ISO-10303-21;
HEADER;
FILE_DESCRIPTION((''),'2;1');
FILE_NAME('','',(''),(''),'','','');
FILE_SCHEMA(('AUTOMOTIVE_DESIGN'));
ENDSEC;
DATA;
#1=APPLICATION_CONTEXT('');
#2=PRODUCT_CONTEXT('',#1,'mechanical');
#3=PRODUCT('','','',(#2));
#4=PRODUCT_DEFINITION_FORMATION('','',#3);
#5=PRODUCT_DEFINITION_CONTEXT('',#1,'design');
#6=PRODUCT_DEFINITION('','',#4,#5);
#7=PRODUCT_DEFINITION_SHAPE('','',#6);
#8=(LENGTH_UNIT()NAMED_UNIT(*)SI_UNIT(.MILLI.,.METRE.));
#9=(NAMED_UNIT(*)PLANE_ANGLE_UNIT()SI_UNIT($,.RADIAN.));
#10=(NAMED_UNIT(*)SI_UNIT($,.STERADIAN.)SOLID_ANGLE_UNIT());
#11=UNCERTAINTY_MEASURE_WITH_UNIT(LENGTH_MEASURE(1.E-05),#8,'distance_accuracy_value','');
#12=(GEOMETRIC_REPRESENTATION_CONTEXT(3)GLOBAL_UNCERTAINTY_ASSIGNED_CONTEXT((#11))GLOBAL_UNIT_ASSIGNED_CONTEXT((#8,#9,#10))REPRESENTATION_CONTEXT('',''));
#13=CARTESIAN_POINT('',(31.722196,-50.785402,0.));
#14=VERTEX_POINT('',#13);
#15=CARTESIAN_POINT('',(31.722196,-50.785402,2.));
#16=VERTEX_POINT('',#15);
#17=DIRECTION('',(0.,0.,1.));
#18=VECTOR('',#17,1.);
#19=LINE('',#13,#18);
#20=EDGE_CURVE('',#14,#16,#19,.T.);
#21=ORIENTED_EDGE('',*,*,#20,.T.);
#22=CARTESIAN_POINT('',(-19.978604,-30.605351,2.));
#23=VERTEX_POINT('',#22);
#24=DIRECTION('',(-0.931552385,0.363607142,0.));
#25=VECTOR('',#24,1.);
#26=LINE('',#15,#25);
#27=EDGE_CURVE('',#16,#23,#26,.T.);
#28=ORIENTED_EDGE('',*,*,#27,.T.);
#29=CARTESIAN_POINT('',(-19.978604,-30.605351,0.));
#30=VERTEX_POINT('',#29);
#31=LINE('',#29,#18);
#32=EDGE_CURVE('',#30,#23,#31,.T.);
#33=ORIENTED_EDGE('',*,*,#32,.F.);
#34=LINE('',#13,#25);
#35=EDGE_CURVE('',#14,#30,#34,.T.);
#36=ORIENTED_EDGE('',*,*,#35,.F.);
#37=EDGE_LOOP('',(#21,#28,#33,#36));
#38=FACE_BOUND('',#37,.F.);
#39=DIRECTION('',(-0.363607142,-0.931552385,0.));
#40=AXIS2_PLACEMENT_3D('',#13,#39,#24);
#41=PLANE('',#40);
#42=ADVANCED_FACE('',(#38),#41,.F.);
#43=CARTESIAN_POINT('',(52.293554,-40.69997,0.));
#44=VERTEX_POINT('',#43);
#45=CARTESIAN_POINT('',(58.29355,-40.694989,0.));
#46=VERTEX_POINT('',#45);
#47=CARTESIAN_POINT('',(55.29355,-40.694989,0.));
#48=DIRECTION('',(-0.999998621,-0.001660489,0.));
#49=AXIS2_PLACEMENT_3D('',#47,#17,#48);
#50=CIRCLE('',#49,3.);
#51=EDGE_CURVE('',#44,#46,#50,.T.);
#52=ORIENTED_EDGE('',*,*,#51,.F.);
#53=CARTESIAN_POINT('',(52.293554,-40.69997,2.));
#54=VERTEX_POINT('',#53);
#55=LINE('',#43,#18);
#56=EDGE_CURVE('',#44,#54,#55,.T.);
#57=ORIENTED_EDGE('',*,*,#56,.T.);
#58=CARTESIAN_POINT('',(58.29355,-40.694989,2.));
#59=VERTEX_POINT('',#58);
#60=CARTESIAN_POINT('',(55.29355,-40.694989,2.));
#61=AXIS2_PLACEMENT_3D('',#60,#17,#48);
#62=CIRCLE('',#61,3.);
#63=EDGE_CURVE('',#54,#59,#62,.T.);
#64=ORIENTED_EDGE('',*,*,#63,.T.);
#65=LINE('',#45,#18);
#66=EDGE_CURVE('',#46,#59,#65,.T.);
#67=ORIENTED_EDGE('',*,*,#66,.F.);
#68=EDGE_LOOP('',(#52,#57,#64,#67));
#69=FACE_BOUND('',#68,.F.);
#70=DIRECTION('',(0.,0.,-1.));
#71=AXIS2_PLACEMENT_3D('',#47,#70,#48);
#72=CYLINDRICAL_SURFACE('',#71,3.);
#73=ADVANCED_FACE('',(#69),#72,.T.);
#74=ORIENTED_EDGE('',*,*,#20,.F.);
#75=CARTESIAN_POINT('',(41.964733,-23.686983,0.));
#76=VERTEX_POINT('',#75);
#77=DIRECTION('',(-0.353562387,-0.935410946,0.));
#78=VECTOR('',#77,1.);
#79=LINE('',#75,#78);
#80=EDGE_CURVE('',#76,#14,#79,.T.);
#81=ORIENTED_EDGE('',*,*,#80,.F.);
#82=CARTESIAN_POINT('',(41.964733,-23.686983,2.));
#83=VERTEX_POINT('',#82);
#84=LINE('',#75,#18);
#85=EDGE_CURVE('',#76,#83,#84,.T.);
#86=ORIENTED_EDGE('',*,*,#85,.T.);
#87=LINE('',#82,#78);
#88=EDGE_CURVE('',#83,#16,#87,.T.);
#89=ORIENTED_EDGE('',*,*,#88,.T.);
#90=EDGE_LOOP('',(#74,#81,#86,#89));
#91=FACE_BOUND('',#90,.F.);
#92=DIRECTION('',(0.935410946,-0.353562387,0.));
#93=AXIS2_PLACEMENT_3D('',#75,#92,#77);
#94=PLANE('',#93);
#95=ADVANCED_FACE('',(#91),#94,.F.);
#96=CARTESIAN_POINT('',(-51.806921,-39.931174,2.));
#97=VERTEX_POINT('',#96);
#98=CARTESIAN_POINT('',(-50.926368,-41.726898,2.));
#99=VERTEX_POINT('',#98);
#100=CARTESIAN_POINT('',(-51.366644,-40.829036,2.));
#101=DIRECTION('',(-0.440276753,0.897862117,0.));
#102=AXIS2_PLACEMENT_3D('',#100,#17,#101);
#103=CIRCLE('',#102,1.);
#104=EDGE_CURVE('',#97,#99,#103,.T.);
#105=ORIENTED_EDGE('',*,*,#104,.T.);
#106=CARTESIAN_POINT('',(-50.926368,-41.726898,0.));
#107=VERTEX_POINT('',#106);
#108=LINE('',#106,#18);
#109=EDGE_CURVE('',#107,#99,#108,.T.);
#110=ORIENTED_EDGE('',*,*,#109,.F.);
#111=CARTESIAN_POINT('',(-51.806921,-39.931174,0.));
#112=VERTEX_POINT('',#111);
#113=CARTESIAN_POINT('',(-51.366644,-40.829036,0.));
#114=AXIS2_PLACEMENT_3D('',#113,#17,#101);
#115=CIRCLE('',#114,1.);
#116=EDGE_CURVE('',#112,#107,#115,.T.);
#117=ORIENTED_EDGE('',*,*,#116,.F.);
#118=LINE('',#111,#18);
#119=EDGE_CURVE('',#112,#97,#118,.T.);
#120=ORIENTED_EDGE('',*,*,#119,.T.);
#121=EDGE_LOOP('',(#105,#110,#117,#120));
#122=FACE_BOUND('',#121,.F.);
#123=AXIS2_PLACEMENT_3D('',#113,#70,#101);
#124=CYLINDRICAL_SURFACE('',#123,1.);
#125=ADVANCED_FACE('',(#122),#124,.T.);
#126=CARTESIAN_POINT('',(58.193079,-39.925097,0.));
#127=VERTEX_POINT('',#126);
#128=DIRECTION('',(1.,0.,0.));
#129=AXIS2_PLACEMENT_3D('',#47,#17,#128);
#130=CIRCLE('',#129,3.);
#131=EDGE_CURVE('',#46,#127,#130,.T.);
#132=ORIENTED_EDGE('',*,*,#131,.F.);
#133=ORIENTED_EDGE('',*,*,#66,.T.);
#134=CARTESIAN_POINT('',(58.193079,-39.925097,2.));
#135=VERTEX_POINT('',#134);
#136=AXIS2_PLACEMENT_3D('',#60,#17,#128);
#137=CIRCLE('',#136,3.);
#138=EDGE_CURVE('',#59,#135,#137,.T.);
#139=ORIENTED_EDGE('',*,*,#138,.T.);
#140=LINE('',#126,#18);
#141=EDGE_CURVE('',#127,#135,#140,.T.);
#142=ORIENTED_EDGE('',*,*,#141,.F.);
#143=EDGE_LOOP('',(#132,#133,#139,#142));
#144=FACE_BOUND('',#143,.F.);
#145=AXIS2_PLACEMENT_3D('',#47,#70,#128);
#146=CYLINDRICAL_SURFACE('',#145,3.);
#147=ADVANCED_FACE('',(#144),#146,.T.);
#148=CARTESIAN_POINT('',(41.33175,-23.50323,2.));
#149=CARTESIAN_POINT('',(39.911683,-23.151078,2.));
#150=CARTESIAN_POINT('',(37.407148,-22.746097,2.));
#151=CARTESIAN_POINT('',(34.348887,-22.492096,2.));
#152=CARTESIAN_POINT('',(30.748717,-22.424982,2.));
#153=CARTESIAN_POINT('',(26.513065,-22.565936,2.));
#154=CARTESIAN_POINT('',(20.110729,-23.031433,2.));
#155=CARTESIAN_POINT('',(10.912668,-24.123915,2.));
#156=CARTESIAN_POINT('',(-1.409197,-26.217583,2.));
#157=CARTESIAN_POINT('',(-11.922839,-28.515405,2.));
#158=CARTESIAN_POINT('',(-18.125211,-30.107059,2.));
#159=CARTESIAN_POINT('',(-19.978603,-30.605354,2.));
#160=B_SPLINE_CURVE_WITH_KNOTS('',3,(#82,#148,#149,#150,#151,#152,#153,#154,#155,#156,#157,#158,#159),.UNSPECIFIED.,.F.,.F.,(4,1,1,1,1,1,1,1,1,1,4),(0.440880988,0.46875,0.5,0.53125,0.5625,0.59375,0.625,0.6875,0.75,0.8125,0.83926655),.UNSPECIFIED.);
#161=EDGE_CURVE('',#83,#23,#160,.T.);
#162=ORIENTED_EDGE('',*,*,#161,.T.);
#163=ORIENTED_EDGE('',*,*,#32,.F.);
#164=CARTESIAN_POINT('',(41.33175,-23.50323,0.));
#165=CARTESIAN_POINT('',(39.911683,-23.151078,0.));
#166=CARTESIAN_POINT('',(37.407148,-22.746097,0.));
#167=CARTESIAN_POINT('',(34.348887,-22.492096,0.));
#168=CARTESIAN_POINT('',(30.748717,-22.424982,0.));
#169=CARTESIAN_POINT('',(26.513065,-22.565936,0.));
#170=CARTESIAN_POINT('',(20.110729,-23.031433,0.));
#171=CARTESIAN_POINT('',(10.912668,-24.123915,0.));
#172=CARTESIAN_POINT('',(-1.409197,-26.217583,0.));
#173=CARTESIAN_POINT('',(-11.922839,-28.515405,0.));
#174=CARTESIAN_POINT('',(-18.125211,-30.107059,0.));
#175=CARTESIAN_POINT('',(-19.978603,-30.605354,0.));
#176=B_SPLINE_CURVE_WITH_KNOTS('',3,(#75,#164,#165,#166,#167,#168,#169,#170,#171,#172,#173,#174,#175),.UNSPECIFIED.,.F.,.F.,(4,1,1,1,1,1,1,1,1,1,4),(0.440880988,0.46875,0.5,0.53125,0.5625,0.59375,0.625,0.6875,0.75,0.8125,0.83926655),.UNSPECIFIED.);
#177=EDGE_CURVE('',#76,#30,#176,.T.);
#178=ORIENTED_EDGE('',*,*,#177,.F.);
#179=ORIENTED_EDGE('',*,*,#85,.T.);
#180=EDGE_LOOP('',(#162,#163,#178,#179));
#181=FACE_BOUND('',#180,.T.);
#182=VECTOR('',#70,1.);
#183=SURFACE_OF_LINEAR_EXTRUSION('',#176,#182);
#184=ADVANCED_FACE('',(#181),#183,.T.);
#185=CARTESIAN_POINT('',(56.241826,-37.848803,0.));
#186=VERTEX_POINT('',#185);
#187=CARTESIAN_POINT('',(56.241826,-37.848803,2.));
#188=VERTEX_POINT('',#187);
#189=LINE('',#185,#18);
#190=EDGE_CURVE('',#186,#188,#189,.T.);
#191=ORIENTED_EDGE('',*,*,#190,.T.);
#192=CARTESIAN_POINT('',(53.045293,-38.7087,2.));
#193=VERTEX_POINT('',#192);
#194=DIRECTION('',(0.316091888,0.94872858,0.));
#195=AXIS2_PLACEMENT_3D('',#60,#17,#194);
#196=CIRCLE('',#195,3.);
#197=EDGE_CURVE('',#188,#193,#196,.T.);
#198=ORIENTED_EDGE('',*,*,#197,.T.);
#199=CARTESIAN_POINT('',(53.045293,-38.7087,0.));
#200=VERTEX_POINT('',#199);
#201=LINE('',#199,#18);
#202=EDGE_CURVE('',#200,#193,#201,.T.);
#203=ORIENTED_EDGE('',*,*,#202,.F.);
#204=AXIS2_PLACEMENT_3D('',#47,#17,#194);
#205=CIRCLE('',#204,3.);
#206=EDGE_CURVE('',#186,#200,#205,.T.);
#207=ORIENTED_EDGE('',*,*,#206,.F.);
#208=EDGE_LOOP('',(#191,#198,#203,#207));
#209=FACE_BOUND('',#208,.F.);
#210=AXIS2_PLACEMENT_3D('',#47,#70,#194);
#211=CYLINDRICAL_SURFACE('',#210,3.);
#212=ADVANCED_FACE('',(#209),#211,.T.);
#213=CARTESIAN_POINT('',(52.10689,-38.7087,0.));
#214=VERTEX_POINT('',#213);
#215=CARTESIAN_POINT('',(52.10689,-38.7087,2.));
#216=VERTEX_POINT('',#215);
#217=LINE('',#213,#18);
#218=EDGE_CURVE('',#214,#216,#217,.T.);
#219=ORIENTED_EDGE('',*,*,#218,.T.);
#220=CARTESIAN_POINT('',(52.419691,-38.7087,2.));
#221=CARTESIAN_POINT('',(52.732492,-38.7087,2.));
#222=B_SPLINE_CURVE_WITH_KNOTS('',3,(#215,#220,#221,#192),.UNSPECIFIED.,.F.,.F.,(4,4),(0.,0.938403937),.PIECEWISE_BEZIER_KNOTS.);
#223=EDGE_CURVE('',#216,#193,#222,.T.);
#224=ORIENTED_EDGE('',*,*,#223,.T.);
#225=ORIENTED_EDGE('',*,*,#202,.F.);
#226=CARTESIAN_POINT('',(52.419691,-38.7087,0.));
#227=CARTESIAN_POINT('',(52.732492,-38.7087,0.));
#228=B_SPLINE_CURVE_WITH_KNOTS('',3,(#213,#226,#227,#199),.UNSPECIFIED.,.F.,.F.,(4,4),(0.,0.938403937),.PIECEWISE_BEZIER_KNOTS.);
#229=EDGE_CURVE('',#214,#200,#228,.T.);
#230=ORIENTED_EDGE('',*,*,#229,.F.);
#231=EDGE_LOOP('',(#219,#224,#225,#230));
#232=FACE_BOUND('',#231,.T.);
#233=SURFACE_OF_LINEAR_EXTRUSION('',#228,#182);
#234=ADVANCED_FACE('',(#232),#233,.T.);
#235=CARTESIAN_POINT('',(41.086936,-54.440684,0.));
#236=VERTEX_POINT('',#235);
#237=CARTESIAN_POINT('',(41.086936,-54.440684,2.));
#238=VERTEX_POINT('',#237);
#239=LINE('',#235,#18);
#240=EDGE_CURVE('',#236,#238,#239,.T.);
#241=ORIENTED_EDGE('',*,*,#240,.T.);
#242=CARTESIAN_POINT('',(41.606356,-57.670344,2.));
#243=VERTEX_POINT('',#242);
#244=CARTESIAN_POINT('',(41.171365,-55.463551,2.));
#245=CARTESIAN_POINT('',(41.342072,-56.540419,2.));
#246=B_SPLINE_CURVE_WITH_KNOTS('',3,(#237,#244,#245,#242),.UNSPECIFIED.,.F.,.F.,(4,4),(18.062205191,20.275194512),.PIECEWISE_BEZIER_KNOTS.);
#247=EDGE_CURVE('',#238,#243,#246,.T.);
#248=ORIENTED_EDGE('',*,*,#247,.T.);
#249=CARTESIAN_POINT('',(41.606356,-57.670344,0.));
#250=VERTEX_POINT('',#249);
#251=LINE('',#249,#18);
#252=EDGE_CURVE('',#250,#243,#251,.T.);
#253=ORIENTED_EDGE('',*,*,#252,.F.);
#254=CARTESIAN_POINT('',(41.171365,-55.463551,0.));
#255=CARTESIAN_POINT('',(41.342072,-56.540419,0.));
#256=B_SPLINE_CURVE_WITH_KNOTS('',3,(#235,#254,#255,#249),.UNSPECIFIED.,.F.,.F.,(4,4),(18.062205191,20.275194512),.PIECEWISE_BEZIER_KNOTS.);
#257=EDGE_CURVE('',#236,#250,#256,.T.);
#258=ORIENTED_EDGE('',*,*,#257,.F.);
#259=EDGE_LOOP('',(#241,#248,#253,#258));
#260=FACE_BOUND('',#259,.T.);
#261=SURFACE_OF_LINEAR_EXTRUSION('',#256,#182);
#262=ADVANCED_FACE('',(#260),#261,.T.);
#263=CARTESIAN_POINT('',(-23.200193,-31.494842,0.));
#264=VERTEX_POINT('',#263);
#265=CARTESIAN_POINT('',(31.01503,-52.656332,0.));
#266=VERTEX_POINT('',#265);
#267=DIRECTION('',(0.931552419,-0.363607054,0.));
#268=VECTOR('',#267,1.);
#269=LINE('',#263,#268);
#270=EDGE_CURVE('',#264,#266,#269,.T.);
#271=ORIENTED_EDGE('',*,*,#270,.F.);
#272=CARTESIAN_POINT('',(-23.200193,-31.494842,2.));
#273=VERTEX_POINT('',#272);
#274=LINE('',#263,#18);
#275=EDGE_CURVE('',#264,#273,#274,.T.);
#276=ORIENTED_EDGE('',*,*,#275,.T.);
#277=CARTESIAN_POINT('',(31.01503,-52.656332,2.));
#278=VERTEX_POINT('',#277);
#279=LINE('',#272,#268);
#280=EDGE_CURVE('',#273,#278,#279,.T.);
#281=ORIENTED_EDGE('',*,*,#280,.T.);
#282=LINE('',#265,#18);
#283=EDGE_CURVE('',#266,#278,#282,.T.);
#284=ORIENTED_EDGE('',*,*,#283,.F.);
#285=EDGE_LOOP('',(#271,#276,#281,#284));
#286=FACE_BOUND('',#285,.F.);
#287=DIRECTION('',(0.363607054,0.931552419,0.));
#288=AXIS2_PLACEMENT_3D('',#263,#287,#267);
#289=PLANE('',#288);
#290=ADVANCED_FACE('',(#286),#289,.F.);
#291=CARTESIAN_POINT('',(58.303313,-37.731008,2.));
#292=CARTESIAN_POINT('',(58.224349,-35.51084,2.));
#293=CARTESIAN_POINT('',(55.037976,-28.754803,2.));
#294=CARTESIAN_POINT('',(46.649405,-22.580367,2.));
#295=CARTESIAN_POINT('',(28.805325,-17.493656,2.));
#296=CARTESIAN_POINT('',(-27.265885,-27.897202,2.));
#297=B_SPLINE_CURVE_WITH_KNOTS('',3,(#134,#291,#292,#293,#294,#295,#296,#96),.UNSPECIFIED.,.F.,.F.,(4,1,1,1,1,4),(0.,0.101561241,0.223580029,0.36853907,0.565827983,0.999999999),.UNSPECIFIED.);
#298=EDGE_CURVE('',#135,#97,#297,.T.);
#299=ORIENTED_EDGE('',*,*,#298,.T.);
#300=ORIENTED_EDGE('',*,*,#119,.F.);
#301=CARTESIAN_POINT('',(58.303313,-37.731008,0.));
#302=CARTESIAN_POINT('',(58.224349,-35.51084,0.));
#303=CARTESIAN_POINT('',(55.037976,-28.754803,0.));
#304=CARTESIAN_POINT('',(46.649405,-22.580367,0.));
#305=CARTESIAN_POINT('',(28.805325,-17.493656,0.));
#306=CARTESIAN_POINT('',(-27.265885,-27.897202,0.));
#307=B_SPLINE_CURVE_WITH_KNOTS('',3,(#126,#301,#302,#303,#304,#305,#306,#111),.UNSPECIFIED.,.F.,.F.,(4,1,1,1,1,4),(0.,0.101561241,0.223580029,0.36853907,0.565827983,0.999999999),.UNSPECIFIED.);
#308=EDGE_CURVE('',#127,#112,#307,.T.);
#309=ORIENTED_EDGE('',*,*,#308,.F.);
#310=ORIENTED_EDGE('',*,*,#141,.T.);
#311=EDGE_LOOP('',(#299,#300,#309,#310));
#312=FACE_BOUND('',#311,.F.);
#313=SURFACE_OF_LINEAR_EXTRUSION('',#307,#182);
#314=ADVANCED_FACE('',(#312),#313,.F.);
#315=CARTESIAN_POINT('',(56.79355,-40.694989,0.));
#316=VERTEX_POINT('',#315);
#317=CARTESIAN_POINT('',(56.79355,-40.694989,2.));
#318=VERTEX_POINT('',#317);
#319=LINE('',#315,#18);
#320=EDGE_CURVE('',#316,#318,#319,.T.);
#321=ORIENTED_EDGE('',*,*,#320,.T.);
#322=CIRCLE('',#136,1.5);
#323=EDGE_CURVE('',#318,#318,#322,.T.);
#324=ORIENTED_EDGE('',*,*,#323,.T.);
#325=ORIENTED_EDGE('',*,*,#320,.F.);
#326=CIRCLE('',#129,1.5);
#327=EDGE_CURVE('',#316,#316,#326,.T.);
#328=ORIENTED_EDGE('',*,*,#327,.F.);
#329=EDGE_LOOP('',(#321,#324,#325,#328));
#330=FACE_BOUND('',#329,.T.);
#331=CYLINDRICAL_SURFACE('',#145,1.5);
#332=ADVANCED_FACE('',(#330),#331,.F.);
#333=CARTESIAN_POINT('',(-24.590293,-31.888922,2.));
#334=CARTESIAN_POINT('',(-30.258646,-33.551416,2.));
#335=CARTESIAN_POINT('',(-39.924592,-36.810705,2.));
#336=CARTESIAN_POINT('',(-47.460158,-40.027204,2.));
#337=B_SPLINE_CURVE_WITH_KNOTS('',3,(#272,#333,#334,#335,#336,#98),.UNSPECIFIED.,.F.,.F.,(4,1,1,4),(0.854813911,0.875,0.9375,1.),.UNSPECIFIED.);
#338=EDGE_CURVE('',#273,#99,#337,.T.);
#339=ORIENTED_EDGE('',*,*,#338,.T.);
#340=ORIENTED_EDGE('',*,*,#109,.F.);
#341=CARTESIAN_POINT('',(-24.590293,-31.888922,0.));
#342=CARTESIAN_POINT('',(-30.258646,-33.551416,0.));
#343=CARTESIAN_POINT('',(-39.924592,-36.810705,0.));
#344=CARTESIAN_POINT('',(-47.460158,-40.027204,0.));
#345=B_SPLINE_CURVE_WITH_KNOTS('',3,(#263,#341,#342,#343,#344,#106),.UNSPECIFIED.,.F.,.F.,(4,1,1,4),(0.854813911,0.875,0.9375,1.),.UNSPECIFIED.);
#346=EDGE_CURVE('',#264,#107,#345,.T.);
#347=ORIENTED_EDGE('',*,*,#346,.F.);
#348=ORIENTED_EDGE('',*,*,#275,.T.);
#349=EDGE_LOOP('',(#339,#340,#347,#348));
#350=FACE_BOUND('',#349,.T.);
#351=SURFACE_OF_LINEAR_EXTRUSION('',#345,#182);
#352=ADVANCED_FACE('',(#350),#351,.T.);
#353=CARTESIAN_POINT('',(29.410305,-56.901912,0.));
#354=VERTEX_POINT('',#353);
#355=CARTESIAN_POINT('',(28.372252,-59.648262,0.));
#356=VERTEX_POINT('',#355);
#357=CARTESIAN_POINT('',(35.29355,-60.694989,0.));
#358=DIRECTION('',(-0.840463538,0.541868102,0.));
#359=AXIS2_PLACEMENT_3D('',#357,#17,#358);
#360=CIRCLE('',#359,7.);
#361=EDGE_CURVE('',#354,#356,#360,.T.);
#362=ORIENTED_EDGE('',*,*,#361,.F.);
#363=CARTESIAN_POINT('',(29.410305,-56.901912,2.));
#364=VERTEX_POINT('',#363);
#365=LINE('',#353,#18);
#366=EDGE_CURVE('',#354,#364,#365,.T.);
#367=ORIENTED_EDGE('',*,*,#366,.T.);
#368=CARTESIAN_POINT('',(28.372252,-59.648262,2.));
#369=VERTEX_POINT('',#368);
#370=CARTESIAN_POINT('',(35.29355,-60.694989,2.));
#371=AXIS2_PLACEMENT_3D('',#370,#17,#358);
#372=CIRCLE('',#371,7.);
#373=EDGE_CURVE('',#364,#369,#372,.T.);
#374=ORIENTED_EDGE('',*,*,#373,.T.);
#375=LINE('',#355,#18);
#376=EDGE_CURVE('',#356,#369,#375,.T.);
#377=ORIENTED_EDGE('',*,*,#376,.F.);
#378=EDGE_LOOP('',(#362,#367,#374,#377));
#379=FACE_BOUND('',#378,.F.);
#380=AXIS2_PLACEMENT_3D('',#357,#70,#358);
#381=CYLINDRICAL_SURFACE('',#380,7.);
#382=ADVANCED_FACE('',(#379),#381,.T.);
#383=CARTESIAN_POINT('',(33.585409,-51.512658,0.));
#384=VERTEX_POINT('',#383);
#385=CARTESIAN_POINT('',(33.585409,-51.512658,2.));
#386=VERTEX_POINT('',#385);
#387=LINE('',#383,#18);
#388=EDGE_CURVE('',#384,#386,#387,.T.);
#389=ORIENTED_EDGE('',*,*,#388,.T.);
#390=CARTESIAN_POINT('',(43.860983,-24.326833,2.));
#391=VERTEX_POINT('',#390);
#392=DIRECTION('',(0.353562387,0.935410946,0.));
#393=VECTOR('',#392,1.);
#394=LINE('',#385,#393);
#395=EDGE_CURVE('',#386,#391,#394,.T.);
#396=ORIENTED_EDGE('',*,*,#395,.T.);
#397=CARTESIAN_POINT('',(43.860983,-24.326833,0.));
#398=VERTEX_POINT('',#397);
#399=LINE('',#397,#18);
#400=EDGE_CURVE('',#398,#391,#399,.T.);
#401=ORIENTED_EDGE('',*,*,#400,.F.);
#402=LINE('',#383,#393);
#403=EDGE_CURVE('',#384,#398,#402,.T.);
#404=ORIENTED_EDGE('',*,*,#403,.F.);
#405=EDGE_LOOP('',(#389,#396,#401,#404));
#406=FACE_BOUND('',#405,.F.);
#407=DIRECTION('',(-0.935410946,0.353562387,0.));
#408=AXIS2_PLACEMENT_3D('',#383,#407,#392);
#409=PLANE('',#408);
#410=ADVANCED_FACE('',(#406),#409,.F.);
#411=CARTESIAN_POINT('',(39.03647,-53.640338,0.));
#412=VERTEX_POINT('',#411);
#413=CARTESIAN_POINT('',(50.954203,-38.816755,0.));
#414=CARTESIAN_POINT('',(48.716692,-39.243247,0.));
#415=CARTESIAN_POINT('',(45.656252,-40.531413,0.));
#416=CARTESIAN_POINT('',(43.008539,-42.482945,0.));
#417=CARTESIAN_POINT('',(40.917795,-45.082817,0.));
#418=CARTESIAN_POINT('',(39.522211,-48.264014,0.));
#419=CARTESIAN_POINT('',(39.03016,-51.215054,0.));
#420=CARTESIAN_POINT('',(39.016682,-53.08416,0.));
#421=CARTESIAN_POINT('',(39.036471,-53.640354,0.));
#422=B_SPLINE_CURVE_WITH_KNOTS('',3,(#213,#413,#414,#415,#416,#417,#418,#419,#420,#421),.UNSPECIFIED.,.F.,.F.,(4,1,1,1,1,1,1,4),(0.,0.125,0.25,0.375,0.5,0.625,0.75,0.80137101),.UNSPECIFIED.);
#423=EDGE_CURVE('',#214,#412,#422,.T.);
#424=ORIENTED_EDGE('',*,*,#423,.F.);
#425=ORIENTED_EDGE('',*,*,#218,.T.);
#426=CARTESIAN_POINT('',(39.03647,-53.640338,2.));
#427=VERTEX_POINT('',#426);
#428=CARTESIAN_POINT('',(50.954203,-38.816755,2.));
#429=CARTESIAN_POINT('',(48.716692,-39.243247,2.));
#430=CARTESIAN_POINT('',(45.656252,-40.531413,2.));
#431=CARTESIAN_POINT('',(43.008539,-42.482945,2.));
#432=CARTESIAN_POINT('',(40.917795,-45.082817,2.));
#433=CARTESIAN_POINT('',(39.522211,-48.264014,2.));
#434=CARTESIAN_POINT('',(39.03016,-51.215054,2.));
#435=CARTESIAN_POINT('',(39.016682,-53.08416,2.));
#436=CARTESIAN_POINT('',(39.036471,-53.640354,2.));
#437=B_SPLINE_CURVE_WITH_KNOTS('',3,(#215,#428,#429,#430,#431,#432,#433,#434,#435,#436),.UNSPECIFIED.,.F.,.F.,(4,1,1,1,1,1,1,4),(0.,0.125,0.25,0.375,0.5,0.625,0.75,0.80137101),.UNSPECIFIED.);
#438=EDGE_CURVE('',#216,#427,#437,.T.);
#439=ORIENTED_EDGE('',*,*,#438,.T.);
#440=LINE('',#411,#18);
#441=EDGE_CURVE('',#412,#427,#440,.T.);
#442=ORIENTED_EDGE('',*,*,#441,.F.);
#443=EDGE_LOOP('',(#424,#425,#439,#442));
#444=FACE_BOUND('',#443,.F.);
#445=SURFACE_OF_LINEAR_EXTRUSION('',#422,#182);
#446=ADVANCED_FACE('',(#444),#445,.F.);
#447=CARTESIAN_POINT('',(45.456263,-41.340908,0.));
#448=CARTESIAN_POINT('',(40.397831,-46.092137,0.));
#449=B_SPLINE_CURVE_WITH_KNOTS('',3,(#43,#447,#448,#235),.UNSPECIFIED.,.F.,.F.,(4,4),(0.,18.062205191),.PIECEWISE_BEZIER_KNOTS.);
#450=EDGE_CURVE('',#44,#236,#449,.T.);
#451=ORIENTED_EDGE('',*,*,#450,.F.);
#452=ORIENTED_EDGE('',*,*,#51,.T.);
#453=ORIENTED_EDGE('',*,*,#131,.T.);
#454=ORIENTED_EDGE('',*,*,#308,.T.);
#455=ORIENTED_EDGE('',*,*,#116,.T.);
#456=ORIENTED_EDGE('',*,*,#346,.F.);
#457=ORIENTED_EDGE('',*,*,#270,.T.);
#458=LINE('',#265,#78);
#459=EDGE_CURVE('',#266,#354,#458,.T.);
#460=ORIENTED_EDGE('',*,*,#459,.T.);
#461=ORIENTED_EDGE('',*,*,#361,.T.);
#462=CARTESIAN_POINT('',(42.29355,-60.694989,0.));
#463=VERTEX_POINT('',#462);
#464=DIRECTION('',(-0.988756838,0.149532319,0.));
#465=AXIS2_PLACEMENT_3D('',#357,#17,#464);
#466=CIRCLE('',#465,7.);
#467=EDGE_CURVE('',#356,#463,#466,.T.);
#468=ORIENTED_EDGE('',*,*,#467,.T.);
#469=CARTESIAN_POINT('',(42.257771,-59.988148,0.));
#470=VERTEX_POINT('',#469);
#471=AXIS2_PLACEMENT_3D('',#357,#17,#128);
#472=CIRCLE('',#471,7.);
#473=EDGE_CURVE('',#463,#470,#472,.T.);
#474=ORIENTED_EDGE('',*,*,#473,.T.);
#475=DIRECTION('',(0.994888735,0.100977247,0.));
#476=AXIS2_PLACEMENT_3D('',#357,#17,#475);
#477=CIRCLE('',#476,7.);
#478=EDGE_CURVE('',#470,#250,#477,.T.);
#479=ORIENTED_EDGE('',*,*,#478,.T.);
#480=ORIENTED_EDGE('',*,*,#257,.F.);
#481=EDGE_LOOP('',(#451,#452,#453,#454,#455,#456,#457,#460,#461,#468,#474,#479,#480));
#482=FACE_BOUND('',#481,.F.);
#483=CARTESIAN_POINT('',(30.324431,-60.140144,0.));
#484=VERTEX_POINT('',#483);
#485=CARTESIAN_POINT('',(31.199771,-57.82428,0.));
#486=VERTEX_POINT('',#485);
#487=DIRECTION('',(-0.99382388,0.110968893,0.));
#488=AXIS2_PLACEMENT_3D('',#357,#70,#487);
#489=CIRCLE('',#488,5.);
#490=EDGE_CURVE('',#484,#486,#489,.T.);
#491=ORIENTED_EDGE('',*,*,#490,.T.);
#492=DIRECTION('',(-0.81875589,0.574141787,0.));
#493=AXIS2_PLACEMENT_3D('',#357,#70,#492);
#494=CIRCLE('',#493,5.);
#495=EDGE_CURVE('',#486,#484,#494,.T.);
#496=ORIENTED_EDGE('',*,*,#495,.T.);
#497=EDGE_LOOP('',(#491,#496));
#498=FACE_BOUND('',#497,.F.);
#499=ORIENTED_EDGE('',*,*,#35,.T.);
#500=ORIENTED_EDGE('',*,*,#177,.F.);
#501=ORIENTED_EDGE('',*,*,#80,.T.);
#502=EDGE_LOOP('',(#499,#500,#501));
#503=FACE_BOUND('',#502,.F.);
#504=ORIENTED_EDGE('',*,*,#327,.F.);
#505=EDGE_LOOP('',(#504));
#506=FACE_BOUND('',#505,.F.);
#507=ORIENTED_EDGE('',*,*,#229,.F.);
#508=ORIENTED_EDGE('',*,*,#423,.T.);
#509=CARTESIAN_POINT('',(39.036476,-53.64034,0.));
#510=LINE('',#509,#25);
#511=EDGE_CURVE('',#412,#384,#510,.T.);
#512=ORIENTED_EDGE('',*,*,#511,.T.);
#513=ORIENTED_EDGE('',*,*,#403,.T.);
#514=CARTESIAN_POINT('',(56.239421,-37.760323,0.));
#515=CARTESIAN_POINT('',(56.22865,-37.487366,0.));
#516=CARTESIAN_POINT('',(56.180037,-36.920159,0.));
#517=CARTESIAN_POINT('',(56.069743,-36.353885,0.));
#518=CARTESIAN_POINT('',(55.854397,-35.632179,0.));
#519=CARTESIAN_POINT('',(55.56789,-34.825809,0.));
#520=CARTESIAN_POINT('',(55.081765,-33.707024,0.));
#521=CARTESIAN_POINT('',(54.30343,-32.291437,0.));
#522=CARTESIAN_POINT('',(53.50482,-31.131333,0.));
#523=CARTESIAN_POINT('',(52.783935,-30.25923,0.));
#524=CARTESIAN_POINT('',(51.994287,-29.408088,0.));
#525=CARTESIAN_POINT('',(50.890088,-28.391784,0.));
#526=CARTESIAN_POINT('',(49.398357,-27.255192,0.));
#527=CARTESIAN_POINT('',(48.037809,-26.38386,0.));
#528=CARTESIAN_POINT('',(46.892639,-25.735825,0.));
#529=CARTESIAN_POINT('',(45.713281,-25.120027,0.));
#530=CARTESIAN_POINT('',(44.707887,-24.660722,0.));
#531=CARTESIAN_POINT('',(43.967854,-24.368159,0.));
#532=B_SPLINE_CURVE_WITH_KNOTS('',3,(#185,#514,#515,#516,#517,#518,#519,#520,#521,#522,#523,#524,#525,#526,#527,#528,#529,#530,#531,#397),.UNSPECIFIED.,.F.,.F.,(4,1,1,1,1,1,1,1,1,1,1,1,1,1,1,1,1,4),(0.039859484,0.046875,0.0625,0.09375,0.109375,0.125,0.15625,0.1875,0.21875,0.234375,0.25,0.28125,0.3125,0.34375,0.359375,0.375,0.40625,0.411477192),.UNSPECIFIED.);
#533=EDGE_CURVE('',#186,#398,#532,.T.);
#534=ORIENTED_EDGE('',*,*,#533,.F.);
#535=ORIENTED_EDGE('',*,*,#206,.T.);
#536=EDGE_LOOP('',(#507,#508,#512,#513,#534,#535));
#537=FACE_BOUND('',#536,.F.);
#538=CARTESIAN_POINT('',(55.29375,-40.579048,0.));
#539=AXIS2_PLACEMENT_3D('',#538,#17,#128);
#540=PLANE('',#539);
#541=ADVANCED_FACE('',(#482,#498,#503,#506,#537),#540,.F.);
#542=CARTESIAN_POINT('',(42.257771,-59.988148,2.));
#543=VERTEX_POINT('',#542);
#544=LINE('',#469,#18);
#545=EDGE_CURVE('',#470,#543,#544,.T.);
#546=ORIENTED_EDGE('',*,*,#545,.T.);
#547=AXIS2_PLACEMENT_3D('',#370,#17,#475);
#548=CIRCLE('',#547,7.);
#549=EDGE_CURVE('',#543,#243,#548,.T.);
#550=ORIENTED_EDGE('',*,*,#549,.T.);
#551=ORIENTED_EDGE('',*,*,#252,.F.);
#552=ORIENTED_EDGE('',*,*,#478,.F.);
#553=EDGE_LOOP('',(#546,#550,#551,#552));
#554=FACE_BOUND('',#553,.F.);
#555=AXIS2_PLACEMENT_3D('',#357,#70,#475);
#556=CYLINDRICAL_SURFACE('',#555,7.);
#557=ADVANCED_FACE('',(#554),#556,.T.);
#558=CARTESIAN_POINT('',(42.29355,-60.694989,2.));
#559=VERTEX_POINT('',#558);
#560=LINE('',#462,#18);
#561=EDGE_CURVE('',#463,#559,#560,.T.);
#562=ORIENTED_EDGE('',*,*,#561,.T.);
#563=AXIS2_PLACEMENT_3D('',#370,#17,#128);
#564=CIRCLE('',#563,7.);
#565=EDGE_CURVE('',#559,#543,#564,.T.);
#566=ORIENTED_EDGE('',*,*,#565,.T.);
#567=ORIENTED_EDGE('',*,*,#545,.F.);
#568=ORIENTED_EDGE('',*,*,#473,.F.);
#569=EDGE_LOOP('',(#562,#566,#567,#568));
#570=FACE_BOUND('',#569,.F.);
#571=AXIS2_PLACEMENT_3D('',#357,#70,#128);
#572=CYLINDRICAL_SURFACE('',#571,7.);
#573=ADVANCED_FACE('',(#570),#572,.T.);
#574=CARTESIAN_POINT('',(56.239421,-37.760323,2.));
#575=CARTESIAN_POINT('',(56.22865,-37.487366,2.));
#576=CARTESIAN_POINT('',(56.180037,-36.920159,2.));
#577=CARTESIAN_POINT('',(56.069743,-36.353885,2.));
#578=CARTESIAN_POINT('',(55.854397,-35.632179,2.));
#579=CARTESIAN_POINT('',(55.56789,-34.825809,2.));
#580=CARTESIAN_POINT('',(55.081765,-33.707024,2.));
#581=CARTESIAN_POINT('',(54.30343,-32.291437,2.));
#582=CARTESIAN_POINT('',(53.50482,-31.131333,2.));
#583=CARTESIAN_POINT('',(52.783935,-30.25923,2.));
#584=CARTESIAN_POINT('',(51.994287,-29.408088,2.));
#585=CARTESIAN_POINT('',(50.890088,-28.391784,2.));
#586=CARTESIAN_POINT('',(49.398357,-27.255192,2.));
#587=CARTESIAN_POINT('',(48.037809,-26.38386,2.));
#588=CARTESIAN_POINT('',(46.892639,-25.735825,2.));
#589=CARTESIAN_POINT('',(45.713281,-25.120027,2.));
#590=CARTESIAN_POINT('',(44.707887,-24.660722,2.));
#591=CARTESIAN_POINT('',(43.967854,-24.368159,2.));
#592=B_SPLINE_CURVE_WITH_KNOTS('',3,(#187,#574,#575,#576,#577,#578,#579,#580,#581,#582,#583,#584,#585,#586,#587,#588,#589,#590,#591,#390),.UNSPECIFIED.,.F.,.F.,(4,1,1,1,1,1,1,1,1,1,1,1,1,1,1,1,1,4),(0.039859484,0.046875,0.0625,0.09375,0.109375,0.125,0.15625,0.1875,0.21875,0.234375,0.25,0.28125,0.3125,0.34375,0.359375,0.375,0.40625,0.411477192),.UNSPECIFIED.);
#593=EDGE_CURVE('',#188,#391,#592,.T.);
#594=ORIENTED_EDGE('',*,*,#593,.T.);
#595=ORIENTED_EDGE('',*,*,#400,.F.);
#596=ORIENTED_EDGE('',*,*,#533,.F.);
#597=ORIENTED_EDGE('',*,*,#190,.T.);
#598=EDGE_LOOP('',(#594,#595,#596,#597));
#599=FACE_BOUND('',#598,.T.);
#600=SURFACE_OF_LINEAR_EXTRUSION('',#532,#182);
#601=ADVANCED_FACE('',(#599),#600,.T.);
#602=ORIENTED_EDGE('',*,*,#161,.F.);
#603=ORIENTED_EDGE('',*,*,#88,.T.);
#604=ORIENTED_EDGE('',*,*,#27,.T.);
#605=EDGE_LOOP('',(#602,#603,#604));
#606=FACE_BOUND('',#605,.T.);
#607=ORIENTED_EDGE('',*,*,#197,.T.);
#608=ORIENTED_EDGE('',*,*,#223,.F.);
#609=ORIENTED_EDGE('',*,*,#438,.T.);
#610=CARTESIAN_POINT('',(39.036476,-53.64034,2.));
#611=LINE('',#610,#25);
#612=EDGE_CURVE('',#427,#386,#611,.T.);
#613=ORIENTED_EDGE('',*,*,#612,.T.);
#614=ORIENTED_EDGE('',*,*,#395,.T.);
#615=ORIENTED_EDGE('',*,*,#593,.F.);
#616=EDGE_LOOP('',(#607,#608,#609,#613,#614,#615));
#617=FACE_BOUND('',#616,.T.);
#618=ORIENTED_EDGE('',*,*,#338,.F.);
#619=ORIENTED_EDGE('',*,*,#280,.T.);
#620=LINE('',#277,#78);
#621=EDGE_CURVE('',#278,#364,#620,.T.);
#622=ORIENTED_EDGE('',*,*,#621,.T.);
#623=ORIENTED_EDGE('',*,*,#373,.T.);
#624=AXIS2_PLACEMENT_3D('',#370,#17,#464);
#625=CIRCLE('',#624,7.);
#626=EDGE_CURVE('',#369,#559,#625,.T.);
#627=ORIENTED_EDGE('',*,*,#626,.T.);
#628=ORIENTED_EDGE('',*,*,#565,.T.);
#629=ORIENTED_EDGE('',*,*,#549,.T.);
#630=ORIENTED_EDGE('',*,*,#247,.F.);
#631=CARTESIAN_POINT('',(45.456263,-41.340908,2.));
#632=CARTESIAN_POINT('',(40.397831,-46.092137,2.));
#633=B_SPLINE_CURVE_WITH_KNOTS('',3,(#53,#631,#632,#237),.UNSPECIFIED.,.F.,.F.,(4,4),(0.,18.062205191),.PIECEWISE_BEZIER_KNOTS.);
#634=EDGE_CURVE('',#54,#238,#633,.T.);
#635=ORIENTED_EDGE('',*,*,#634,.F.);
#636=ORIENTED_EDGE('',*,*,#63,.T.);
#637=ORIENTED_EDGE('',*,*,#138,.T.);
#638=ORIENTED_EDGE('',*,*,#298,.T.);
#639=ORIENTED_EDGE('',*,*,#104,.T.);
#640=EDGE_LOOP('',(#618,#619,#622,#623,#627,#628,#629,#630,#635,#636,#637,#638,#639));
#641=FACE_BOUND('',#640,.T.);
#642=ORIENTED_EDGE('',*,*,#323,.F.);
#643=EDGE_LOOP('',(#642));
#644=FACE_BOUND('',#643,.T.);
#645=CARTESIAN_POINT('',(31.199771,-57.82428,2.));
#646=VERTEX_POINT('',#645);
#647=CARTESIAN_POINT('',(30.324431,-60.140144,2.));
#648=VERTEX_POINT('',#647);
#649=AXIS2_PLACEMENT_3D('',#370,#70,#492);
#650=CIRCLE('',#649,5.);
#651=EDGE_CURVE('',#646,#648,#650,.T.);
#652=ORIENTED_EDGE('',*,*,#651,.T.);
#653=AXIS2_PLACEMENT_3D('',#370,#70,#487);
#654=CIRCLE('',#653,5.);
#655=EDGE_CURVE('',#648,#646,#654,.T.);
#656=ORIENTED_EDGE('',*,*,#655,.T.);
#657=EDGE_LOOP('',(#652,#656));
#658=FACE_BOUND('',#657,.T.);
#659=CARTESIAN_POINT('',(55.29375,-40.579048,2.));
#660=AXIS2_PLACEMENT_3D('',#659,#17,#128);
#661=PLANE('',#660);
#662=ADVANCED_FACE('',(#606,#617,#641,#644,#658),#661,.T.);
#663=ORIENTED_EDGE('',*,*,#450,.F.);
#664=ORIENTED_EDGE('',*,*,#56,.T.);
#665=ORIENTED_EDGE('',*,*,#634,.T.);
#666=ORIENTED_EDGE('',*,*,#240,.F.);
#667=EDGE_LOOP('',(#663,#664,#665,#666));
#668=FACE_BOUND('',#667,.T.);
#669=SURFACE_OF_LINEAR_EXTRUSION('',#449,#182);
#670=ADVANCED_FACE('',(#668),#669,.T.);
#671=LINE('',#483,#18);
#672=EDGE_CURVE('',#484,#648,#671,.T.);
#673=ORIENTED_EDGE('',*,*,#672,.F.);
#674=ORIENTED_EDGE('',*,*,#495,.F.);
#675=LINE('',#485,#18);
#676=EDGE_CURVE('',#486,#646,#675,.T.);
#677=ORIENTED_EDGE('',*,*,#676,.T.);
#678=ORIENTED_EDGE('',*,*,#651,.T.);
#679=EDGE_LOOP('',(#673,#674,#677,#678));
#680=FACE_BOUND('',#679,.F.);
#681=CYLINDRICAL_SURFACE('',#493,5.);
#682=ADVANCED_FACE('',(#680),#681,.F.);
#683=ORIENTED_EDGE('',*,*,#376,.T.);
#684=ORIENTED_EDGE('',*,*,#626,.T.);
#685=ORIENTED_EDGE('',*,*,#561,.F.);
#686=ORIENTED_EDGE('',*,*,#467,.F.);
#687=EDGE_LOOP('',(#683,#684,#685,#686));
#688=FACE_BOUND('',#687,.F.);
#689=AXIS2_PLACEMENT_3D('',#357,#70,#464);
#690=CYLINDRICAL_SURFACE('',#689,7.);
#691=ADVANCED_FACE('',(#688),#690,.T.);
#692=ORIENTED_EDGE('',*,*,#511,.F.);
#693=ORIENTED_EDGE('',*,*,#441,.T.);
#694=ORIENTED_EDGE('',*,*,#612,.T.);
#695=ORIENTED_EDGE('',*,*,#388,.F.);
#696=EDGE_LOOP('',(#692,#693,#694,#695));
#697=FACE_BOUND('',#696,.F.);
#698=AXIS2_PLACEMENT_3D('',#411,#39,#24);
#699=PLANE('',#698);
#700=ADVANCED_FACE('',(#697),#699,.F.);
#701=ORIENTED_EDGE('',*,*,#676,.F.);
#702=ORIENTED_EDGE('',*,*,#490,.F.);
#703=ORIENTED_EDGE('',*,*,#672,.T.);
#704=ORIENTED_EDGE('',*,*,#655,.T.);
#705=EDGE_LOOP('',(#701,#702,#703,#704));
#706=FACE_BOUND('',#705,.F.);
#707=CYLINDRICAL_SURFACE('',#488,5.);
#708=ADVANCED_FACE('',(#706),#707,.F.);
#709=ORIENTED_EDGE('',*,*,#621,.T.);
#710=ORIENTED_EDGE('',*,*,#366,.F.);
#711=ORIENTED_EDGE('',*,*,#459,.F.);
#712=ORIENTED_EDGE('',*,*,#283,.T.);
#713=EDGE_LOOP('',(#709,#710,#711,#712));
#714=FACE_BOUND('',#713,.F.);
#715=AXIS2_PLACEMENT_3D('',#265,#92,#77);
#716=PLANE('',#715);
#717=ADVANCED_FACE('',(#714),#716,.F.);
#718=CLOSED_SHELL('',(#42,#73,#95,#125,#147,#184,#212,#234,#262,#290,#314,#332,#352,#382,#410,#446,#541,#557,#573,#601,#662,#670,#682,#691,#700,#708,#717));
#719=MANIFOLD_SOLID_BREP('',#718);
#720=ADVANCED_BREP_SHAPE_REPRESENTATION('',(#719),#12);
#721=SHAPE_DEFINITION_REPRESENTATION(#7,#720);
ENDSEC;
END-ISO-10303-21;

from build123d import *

# Parameters (mm, degrees)
F0_R     = 1.5
F1_DEPTH = 2


# Not quite as in the source:
# - ends of sketch curves that miss each other by under 0.0002 mm in the source are joined
# - the dataset's text gives a spline's control points without its knots; the knots are read off the source's solid
# - a feature names something its author has since deleted; it is built from what else it names


with BuildPart() as f1:
    # F0 (on Top) → F1 (new body)
    with BuildSketch(Plane.XY):
        with BuildLine():
            ThreePointArc((52.2935542038, -40.6999699993), (55.2960408024, -43.6949874982), (58.293550068, -40.6949885322))
            ThreePointArc((58.293550068, -40.6949885322), (58.2683262446, -40.3067789254), (58.1930789354, -39.9250974055))
            ThreePointArc((58.1930789354, -39.9250974055), (57.4796767246, -38.6405177387), (56.2418257324, -37.8488027926))
            ThreePointArc((56.2418257324, -37.8488027926), (54.5142276657, -37.797980318), (53.0452934588, -38.7086999783))
            ThreePointArc((53.0452934588, -38.7086999783), (52.4868923439, -39.6354261603), (52.2935542038, -40.6999699993))
        make_face()
        with Locations((55.293550068, -40.6949885322)):
            Circle(F0_R, mode=Mode.SUBTRACT)
        with BuildLine():
            ThreePointArc((56.2418257324, -37.8488027926), (57.4796767246, -38.6405177387), (58.1930789354, -39.9250974055))
            add(Edge.make_bspline(
                [(58.1930789354, -39.9250974055), (58.3033130736, -37.7310082657), (58.2243494159, -35.5108400169), (55.0379759914, -28.7548025201), (48.9442417419, -24.2694887803), (44.3900033027, -22.3203597806), (42.6738912189, -21.8107824439)],
                knots=[0, 0, 0, 0, 0.1015612411, 0.2235800295, 0.3685390699, 0.4388199083, 0.4388199083, 0.4388199083, 0.4388199083], degree=3))
            Line((42.6738912189, -21.8107824439), (41.964733286, -23.686983414))
            add(Edge.make_bspline(
                [(43.8609833986, -24.3268333981), (43.3289424335, -24.1211020721), (42.7047021585, -23.9054209924), (42.0415249398, -23.7092758985), (41.964733286, -23.686983414)],
                knots=[0.4114771922, 0.4114771922, 0.4114771922, 0.4114771922, 0.4375, 0.4408809882, 0.4408809882, 0.4408809882, 0.4408809882], degree=3))
            add(Edge.make_bspline(
                [(56.2418257324, -37.8488027926), (56.2394213733, -37.7603227769), (56.2286503864, -37.4873658698), (56.1800365415, -36.9201590877), (56.069742607, -36.3538850938), (55.8543969217, -35.6321786342), (55.5678897973, -34.8258093362), (55.0817648726, -33.7070238451), (54.3034301535, -32.2914370705), (53.5048198591, -31.1313333662), (52.7839346376, -30.2592295206), (51.9942866252, -29.4080883353), (50.8900875481, -28.3917840446), (49.39835744, -27.2551920717), (48.0378091306, -26.3838599758), (46.892639081, -25.7358249791), (45.7132806304, -25.1200272482), (44.7078870744, -24.6607216085), (43.9678542796, -24.368158577), (43.8609833986, -24.3268333981)],
                knots=[0.0398594843, 0.0398594843, 0.0398594843, 0.0398594843, 0.046875, 0.0625, 0.09375, 0.109375, 0.125, 0.15625, 0.1875, 0.21875, 0.234375, 0.25, 0.28125, 0.3125, 0.34375, 0.359375, 0.375, 0.40625, 0.4114771922, 0.4114771922, 0.4114771922, 0.4114771922], degree=3))
        make_face()
        with BuildLine():
            add(Edge.make_bspline(
                [(52.2935542038, -40.6999699993), (45.456263492, -41.3409080355), (40.3978308424, -46.0921366862), (41.0869357168, -54.4406835786)],
                knots=[0, 0, 0, 0, 18.0622051912, 18.0622051912, 18.0622051912, 18.0622051912], degree=3))
            ThreePointArc((52.2935542038, -40.6999699993), (52.4868923439, -39.6354261603), (53.0452934588, -38.7086999783))
            add(Edge.make_bspline(
                [(52.1068895218, -38.7086999783), (52.4196908341, -38.7086999783), (52.7324921465, -38.7086999783), (53.0452934588, -38.7086999783)],
                knots=[0, 0, 0, 0, 0.938403937, 0.938403937, 0.938403937, 0.938403937], degree=3))
            add(Edge.make_bspline(
                [(52.1068895218, -38.7086999783), (50.9542029326, -38.8167545733), (48.7166922252, -39.2432467553), (45.656251664, -40.5314133508), (43.0085385627, -42.4829452683), (40.9177950005, -45.0828169643), (39.5222111221, -48.2640140254), (39.0301599925, -51.2150541571), (39.0166820966, -53.0841597893), (39.0364706431, -53.640353514)],
                knots=[0, 0, 0, 0, 0.125, 0.25, 0.375, 0.5, 0.625, 0.75, 0.8013710099, 0.8013710099, 0.8013710099, 0.8013710099], degree=3))
            Line((39.0364706431, -53.640353514), (41.0869357168, -54.4406835786))
        make_face()
        with BuildLine():
            Line((41.964733286, -23.686983414), (42.6738912189, -21.8107824439))
            add(Edge.make_bspline(
                [(42.6738912189, -21.8107824439), (39.5726178708, -20.8898993454), (22.5646670262, -18.6515577464), (-27.2658854571, -27.8972020005), (-51.8069210646, -39.9311738866)],
                knots=[0.4388199083, 0.4388199083, 0.4388199083, 0.4388199083, 0.5658279827, 1, 1, 1, 1], degree=3))
            ThreePointArc((-51.8069210646, -39.9311738866), (-52.2645064284, -41.2693127564), (-50.9263675587, -41.7268981202))
            add(Edge.make_bspline(
                [(-23.2001931383, -31.4948417187), (-24.5902934046, -31.8889224129), (-30.2586462024, -33.5514164099), (-39.9245924887, -36.8107053488), (-47.460158402, -40.0272036082), (-50.9263675587, -41.7268981202)],
                knots=[0.8548139109, 0.8548139109, 0.8548139109, 0.8548139109, 0.875, 0.9375, 1, 1, 1, 1], degree=3))
            add(Edge.make_bspline(
                [(-19.9786029715, -30.6053536552), (-21.0551466867, -30.8947880406), (-22.1295355043, -31.1913200851), (-23.2001931383, -31.4948417187)],
                knots=[0.8392665501, 0.8392665501, 0.8392665501, 0.8392665501, 0.8548139109, 0.8548139109, 0.8548139109, 0.8548139109], degree=3))
            add(Edge.make_bspline(
                [(41.964733286, -23.686983414), (41.3317504553, -23.503229591), (39.9116827451, -23.1510783719), (37.4071483832, -22.746096553), (34.3488873951, -22.4920963849), (30.7487168375, -22.424981715), (26.5130652723, -22.5659356176), (20.1107293403, -23.0314333909), (10.9126678715, -24.1239147624), (-1.4091965396, -26.2175832368), (-11.9228386138, -28.5154051855), (-18.1252105086, -30.1070594376), (-19.9786029715, -30.6053536552)],
                knots=[0.4408809882, 0.4408809882, 0.4408809882, 0.4408809882, 0.46875, 0.5, 0.53125, 0.5625, 0.59375, 0.625, 0.6875, 0.75, 0.8125, 0.8392665501, 0.8392665501, 0.8392665501, 0.8392665501], degree=3))
        make_face()
        with BuildLine():
            add(Edge.make_bspline(
                [(41.0869357168, -54.4406835786), (41.171365149, -55.4635512139), (41.3420723504, -56.5404191219), (41.6063564607, -57.670343851)],
                knots=[18.0622051912, 18.0622051912, 18.0622051912, 18.0622051912, 20.2751945115, 20.2751945115, 20.2751945115, 20.2751945115], degree=3))
            Line((41.0869357168, -54.4406835786), (39.0364758665, -53.6403401319))
            Line((39.0364758665, -53.6403401319), (33.5854085722, -51.5126583899))
            Line((33.5854085722, -51.5126583899), (32.8782428587, -53.383588596))
            Line((32.8782428587, -53.383588596), (33.9898275109, -53.8174666315))
            ThreePointArc((33.9898275109, -53.8174666315), (38.453280426, -54.4487013098), (41.6063564607, -57.670343851))
        make_face()
        with BuildLine():
            Line((33.5854085722, -51.5126583899), (43.8609833986, -24.3268333981))
            add(Edge.make_bspline(
                [(43.8609833986, -24.3268333981), (43.3289424335, -24.1211020721), (42.7047021585, -23.9054209924), (42.0415249398, -23.7092758985), (41.964733286, -23.686983414)],
                knots=[0.4114771922, 0.4114771922, 0.4114771922, 0.4114771922, 0.4375, 0.4408809882, 0.4408809882, 0.4408809882, 0.4408809882], degree=3))
            Line((41.964733286, -23.686983414), (31.7221959356, -50.7854020024))
            Line((31.7221959356, -50.7854020024), (33.5854085722, -51.5126583899))
        make_face()
        with BuildLine():
            ThreePointArc((42.257771215, -59.9881478041), (42.032460875, -58.8010294155), (41.6063564607, -57.670343851))
            add(Edge.make_bspline(
                [(41.6063564607, -57.670343851), (41.7816276486, -58.4197012349), (41.9980562098, -59.1923942837), (42.257771215, -59.9881478041)],
                knots=[20.2751945115, 20.2751945115, 20.2751945115, 20.2751945115, 21.7428319964, 21.7428319964, 21.7428319964, 21.7428319964], degree=3))
        make_face()
        with BuildLine():
            add(Edge.make_bspline(
                [(41.6063564607, -57.670343851), (41.7816276486, -58.4197012349), (41.9980562098, -59.1923942837), (42.257771215, -59.9881478041)],
                knots=[20.2751945115, 20.2751945115, 20.2751945115, 20.2751945115, 21.7428319964, 21.7428319964, 21.7428319964, 21.7428319964], degree=3))
            ThreePointArc((41.6063564607, -57.670343851), (38.453280426, -54.4487013098), (33.9898275109, -53.8174666315))
            ThreePointArc((33.9898275109, -53.8174666315), (33.2574115394, -53.9976651943), (32.5486357461, -54.2556216871))
            ThreePointArc((32.5486357461, -54.2556216871), (30.7811233168, -55.3435396802), (29.4103052988, -56.9019118146))
            Line((29.4103052988, -56.9019118146), (28.3722521988, -59.6482622997))
            ThreePointArc((28.3722521988, -59.6482622997), (34.7687096562, -67.6752852696), (42.293550068, -60.6949885322))
            ThreePointArc((42.293550068, -60.6949885322), (42.2845996326, -60.3411156944), (42.257771215, -59.9881478041))
        make_face()
        with BuildLine():
            ThreePointArc((31.1997706158, -57.824279596), (36.7987249314, -55.9269230303), (40.293550068, -60.6949885322))
            ThreePointArc((40.293550068, -60.6949885322), (35.0156984919, -65.6872624131), (30.3244306673, -60.1401440657))
            ThreePointArc((30.3244306673, -60.1401440657), (30.6164953361, -58.9271765979), (31.1997706158, -57.824279596))
        make_face(mode=Mode.SUBTRACT)
        Polygon((32.8782428587, -53.383588596), (33.5854085722, -51.5126583899), (31.7221959356, -50.7854020024), (31.015030222, -52.6563322085), align=None)
        with BuildLine():
            Line((31.015030222, -52.6563322085), (31.7221959356, -50.7854020024))
            Line((31.7221959356, -50.7854020024), (-19.9786054149, -30.6053445671))
            add(Edge.make_bspline(
                [(-19.9786054149, -30.6053445671), (-21.0551466867, -30.8947880406), (-22.1295355043, -31.1913200851), (-23.2001931383, -31.4948417187)],
                knots=[0.8392665501, 0.8392665501, 0.8392665501, 0.8392665501, 0.8548139109, 0.8548139109, 0.8548139109, 0.8548139109], degree=3))
            Line((-23.2001931383, -31.4948417187), (31.015030222, -52.6563322085))
        make_face()
        with BuildLine():
            ThreePointArc((32.5486357461, -54.2556216871), (33.2574115394, -53.9976651943), (33.9898275109, -53.8174666315))
            Line((33.9898275109, -53.8174666315), (32.8782428587, -53.383588596))
            Line((32.8782428587, -53.383588596), (32.5486357461, -54.2556216871))
        make_face()
        with BuildLine():
            Line((32.5486357461, -54.2556216871), (32.8782428587, -53.383588596))
            Line((32.8782428587, -53.383588596), (31.015030222, -52.6563322085))
            Line((31.015030222, -52.6563322085), (29.4103052988, -56.9019118146))
            ThreePointArc((29.4103052988, -56.9019118146), (30.7811233168, -55.3435396802), (32.5486357461, -54.2556216871))
        make_face()
        with BuildLine():
            Line((28.3722521988, -59.6482622997), (29.4103052988, -56.9019118146))
            ThreePointArc((29.4103052988, -56.9019118146), (28.7456734434, -58.2200518242), (28.3722521988, -59.6482622997))
        make_face()
    extrude(amount=F1_DEPTH)


solid = f1.part
